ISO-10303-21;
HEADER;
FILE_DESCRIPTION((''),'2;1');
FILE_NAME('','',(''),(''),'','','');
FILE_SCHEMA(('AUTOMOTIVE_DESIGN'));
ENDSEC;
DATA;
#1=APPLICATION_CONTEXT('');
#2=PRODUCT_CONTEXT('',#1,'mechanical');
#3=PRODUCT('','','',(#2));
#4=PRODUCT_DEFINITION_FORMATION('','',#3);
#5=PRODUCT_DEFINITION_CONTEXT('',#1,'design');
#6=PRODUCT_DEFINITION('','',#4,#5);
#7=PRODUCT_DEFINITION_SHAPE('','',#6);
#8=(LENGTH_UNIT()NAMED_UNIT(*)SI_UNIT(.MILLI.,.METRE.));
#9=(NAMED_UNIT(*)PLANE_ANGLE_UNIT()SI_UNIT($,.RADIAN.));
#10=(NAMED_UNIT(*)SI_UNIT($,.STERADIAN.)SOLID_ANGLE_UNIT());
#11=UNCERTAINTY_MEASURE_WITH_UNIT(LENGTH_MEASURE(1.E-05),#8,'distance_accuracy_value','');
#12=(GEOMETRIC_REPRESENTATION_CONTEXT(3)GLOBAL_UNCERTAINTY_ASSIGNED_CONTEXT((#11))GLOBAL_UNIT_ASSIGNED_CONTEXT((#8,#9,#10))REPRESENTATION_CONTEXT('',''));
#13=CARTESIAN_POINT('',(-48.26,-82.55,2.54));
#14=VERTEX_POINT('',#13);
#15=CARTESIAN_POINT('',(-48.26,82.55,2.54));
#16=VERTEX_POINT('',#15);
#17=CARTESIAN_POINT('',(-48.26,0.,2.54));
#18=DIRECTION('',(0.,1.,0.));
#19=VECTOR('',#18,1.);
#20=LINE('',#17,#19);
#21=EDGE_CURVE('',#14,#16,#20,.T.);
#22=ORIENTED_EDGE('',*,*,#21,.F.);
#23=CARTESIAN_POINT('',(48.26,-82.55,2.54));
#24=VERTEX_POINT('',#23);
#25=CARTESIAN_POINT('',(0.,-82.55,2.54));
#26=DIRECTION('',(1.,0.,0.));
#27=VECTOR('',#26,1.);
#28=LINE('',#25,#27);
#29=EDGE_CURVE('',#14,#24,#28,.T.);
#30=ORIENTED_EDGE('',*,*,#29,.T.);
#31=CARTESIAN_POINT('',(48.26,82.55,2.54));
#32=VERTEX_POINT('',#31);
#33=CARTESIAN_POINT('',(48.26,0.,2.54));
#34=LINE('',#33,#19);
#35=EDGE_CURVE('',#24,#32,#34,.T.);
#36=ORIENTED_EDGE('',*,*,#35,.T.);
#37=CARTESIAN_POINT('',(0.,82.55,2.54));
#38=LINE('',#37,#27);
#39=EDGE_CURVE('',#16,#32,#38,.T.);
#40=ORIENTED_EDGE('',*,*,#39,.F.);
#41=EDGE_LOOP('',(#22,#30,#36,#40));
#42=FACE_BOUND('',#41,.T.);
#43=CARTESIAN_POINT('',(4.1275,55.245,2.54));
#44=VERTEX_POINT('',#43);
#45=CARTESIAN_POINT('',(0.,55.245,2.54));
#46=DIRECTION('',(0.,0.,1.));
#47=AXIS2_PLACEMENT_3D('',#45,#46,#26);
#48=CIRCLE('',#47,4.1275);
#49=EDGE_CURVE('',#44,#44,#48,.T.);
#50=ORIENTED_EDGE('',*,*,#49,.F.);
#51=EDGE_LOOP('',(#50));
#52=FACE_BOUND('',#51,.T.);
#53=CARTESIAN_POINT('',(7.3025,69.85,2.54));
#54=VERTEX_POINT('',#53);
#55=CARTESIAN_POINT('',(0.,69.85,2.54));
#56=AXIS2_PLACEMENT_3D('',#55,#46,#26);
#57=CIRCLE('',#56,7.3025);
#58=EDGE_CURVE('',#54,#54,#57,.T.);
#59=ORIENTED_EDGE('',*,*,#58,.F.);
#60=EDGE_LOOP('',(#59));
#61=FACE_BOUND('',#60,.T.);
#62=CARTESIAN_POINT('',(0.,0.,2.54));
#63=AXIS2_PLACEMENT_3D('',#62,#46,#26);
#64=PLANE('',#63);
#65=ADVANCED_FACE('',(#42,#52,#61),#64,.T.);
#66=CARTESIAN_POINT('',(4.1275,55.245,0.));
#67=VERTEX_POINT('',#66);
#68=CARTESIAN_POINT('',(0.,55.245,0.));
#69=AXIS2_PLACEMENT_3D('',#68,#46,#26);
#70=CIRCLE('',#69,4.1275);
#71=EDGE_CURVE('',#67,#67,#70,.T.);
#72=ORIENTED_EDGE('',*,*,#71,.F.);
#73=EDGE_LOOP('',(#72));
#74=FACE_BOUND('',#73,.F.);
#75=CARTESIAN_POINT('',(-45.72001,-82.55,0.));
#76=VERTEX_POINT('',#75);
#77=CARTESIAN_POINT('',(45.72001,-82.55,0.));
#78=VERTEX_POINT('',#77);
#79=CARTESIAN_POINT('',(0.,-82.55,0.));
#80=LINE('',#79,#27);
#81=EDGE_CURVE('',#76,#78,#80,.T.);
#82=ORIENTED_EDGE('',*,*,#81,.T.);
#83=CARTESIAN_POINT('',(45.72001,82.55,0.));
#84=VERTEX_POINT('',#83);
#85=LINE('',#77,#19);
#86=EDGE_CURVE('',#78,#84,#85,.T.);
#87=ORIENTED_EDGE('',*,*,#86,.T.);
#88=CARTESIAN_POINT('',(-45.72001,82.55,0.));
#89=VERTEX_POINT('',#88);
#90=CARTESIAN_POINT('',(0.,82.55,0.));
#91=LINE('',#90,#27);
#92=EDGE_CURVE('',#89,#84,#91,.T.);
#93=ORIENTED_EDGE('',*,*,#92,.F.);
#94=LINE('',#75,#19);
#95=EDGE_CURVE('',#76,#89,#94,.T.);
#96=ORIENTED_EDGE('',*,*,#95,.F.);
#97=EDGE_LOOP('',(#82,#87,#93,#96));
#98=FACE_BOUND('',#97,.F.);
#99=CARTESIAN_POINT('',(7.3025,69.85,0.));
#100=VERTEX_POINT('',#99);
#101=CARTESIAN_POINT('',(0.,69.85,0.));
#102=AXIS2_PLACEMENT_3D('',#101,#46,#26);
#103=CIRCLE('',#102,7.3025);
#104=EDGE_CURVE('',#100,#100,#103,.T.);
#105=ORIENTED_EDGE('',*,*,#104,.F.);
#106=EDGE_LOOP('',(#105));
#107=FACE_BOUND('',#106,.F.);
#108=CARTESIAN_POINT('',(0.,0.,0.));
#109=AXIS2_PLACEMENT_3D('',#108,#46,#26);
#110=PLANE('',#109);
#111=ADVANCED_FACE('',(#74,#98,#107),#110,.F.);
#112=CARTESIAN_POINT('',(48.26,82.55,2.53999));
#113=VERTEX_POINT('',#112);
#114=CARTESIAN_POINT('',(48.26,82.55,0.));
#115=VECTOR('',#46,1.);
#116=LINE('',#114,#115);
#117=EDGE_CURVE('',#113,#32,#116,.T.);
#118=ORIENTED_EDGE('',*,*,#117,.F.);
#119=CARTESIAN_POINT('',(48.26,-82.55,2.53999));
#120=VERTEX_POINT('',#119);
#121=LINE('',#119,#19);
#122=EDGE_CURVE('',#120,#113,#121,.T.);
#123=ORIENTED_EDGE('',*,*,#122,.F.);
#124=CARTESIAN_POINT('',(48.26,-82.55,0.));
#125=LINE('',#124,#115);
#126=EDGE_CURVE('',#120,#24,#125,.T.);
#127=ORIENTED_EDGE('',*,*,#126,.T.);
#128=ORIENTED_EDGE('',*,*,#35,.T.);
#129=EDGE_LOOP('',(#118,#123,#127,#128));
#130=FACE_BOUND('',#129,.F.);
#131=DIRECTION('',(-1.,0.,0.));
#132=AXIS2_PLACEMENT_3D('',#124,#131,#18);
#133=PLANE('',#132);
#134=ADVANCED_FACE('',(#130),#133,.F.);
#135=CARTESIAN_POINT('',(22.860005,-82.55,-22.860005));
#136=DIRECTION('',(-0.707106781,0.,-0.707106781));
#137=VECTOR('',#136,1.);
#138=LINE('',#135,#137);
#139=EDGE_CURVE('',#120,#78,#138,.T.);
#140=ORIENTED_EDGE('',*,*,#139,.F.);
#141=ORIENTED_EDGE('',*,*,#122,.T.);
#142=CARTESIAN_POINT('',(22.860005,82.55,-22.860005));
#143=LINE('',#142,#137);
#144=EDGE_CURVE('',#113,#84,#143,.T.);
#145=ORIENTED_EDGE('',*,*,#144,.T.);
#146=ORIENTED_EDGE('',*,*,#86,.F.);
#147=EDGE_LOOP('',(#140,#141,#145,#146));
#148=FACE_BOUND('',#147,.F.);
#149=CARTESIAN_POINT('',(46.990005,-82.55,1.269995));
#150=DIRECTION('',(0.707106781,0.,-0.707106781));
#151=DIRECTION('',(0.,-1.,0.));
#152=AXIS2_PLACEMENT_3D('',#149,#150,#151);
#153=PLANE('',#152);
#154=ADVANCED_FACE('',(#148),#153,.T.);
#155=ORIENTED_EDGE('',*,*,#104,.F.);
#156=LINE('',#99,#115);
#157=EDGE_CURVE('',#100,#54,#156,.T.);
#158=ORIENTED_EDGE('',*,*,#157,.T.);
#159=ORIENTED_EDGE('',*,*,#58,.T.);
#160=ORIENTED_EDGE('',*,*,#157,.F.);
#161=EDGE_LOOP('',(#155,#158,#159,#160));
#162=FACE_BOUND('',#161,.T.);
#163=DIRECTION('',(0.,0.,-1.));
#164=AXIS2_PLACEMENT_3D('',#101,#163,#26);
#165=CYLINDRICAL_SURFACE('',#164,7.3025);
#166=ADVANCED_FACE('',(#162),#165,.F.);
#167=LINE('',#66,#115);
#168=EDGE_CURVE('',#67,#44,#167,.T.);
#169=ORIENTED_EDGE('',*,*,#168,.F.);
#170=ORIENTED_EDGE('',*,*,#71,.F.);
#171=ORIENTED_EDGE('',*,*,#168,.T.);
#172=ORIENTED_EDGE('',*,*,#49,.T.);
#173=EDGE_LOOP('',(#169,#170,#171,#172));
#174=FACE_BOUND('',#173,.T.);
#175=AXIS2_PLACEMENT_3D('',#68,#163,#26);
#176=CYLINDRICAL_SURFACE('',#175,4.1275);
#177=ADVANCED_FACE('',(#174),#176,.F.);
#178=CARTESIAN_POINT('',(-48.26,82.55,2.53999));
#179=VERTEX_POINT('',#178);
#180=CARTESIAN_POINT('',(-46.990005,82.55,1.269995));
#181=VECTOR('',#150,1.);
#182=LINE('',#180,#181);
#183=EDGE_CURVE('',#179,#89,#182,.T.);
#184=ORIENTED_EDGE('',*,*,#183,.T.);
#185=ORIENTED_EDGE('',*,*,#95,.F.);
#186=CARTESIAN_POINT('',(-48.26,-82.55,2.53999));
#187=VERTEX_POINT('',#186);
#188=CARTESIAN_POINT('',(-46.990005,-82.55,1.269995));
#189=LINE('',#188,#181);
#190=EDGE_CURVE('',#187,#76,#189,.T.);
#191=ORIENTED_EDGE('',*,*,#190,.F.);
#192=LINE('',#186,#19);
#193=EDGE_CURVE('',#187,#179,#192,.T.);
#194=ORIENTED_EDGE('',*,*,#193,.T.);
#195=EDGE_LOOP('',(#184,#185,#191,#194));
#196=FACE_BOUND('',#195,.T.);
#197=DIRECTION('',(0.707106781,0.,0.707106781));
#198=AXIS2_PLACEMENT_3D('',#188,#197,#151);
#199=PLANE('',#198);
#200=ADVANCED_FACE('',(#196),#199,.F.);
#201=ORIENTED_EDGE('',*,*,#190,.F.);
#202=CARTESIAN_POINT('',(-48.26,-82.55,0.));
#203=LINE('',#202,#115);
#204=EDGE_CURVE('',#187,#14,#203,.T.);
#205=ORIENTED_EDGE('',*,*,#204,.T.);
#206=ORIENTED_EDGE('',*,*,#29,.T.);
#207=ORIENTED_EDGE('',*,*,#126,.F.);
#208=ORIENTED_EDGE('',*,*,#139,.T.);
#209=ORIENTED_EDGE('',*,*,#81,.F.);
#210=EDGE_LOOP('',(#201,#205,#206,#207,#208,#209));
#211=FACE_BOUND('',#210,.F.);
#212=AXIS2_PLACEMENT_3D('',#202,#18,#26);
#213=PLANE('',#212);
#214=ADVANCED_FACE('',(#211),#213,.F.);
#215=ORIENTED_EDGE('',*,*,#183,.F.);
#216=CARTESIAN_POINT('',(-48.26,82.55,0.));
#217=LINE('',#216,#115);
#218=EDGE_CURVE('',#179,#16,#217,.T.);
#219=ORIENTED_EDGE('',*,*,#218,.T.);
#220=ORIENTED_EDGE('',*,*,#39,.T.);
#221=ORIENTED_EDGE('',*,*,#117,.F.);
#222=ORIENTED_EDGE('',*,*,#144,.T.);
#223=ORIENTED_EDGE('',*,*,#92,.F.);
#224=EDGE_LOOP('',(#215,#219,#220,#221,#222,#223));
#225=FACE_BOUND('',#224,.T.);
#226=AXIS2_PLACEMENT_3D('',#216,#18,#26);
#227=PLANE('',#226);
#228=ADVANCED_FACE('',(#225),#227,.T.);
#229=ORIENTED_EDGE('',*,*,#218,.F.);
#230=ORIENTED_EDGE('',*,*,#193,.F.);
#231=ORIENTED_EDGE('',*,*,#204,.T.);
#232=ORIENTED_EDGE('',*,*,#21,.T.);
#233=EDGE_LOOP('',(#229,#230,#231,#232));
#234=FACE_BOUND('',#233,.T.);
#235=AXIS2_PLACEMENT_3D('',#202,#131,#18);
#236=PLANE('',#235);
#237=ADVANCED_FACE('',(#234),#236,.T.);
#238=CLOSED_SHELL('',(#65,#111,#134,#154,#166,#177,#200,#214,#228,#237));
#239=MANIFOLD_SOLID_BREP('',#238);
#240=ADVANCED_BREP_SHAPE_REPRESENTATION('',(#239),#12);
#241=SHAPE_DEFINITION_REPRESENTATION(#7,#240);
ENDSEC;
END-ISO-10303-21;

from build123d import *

# Parameters (mm, degrees)
F0_W     = 96.52
F0_H     = 165.1
F0_R     = 4.1275
F0_R_2   = 7.3025
F1_DEPTH = 2.54
F2_SIZE  = 2.53999


# Not quite as in the source:
# - a fillet or chamfer is up to 0.001 mm smaller than in the source, because OpenCascade refuses the exact size


with BuildPart() as f1:
    # F0 (on Top) → F1 (new body)
    with BuildSketch(Plane.XY):
        Rectangle(F0_W, F0_H)
        with Locations((0, 55.245)):
            Circle(F0_R, mode=Mode.SUBTRACT)
        with Locations((0, 69.85)):
            Circle(F0_R_2, mode=Mode.SUBTRACT)
    extrude(amount=F1_DEPTH)

    # F2 (size 2.54 in the source; OpenCascade refuses exactly that, so slightly less here)
    f2_edges = [f1.edges().sort_by_distance(p)[0] for p in [
        (-48.26, 0, 0),
        (48.26, 0, 0),
    ]]
    chamfer(f2_edges, length=F2_SIZE)


solid = f1.part
